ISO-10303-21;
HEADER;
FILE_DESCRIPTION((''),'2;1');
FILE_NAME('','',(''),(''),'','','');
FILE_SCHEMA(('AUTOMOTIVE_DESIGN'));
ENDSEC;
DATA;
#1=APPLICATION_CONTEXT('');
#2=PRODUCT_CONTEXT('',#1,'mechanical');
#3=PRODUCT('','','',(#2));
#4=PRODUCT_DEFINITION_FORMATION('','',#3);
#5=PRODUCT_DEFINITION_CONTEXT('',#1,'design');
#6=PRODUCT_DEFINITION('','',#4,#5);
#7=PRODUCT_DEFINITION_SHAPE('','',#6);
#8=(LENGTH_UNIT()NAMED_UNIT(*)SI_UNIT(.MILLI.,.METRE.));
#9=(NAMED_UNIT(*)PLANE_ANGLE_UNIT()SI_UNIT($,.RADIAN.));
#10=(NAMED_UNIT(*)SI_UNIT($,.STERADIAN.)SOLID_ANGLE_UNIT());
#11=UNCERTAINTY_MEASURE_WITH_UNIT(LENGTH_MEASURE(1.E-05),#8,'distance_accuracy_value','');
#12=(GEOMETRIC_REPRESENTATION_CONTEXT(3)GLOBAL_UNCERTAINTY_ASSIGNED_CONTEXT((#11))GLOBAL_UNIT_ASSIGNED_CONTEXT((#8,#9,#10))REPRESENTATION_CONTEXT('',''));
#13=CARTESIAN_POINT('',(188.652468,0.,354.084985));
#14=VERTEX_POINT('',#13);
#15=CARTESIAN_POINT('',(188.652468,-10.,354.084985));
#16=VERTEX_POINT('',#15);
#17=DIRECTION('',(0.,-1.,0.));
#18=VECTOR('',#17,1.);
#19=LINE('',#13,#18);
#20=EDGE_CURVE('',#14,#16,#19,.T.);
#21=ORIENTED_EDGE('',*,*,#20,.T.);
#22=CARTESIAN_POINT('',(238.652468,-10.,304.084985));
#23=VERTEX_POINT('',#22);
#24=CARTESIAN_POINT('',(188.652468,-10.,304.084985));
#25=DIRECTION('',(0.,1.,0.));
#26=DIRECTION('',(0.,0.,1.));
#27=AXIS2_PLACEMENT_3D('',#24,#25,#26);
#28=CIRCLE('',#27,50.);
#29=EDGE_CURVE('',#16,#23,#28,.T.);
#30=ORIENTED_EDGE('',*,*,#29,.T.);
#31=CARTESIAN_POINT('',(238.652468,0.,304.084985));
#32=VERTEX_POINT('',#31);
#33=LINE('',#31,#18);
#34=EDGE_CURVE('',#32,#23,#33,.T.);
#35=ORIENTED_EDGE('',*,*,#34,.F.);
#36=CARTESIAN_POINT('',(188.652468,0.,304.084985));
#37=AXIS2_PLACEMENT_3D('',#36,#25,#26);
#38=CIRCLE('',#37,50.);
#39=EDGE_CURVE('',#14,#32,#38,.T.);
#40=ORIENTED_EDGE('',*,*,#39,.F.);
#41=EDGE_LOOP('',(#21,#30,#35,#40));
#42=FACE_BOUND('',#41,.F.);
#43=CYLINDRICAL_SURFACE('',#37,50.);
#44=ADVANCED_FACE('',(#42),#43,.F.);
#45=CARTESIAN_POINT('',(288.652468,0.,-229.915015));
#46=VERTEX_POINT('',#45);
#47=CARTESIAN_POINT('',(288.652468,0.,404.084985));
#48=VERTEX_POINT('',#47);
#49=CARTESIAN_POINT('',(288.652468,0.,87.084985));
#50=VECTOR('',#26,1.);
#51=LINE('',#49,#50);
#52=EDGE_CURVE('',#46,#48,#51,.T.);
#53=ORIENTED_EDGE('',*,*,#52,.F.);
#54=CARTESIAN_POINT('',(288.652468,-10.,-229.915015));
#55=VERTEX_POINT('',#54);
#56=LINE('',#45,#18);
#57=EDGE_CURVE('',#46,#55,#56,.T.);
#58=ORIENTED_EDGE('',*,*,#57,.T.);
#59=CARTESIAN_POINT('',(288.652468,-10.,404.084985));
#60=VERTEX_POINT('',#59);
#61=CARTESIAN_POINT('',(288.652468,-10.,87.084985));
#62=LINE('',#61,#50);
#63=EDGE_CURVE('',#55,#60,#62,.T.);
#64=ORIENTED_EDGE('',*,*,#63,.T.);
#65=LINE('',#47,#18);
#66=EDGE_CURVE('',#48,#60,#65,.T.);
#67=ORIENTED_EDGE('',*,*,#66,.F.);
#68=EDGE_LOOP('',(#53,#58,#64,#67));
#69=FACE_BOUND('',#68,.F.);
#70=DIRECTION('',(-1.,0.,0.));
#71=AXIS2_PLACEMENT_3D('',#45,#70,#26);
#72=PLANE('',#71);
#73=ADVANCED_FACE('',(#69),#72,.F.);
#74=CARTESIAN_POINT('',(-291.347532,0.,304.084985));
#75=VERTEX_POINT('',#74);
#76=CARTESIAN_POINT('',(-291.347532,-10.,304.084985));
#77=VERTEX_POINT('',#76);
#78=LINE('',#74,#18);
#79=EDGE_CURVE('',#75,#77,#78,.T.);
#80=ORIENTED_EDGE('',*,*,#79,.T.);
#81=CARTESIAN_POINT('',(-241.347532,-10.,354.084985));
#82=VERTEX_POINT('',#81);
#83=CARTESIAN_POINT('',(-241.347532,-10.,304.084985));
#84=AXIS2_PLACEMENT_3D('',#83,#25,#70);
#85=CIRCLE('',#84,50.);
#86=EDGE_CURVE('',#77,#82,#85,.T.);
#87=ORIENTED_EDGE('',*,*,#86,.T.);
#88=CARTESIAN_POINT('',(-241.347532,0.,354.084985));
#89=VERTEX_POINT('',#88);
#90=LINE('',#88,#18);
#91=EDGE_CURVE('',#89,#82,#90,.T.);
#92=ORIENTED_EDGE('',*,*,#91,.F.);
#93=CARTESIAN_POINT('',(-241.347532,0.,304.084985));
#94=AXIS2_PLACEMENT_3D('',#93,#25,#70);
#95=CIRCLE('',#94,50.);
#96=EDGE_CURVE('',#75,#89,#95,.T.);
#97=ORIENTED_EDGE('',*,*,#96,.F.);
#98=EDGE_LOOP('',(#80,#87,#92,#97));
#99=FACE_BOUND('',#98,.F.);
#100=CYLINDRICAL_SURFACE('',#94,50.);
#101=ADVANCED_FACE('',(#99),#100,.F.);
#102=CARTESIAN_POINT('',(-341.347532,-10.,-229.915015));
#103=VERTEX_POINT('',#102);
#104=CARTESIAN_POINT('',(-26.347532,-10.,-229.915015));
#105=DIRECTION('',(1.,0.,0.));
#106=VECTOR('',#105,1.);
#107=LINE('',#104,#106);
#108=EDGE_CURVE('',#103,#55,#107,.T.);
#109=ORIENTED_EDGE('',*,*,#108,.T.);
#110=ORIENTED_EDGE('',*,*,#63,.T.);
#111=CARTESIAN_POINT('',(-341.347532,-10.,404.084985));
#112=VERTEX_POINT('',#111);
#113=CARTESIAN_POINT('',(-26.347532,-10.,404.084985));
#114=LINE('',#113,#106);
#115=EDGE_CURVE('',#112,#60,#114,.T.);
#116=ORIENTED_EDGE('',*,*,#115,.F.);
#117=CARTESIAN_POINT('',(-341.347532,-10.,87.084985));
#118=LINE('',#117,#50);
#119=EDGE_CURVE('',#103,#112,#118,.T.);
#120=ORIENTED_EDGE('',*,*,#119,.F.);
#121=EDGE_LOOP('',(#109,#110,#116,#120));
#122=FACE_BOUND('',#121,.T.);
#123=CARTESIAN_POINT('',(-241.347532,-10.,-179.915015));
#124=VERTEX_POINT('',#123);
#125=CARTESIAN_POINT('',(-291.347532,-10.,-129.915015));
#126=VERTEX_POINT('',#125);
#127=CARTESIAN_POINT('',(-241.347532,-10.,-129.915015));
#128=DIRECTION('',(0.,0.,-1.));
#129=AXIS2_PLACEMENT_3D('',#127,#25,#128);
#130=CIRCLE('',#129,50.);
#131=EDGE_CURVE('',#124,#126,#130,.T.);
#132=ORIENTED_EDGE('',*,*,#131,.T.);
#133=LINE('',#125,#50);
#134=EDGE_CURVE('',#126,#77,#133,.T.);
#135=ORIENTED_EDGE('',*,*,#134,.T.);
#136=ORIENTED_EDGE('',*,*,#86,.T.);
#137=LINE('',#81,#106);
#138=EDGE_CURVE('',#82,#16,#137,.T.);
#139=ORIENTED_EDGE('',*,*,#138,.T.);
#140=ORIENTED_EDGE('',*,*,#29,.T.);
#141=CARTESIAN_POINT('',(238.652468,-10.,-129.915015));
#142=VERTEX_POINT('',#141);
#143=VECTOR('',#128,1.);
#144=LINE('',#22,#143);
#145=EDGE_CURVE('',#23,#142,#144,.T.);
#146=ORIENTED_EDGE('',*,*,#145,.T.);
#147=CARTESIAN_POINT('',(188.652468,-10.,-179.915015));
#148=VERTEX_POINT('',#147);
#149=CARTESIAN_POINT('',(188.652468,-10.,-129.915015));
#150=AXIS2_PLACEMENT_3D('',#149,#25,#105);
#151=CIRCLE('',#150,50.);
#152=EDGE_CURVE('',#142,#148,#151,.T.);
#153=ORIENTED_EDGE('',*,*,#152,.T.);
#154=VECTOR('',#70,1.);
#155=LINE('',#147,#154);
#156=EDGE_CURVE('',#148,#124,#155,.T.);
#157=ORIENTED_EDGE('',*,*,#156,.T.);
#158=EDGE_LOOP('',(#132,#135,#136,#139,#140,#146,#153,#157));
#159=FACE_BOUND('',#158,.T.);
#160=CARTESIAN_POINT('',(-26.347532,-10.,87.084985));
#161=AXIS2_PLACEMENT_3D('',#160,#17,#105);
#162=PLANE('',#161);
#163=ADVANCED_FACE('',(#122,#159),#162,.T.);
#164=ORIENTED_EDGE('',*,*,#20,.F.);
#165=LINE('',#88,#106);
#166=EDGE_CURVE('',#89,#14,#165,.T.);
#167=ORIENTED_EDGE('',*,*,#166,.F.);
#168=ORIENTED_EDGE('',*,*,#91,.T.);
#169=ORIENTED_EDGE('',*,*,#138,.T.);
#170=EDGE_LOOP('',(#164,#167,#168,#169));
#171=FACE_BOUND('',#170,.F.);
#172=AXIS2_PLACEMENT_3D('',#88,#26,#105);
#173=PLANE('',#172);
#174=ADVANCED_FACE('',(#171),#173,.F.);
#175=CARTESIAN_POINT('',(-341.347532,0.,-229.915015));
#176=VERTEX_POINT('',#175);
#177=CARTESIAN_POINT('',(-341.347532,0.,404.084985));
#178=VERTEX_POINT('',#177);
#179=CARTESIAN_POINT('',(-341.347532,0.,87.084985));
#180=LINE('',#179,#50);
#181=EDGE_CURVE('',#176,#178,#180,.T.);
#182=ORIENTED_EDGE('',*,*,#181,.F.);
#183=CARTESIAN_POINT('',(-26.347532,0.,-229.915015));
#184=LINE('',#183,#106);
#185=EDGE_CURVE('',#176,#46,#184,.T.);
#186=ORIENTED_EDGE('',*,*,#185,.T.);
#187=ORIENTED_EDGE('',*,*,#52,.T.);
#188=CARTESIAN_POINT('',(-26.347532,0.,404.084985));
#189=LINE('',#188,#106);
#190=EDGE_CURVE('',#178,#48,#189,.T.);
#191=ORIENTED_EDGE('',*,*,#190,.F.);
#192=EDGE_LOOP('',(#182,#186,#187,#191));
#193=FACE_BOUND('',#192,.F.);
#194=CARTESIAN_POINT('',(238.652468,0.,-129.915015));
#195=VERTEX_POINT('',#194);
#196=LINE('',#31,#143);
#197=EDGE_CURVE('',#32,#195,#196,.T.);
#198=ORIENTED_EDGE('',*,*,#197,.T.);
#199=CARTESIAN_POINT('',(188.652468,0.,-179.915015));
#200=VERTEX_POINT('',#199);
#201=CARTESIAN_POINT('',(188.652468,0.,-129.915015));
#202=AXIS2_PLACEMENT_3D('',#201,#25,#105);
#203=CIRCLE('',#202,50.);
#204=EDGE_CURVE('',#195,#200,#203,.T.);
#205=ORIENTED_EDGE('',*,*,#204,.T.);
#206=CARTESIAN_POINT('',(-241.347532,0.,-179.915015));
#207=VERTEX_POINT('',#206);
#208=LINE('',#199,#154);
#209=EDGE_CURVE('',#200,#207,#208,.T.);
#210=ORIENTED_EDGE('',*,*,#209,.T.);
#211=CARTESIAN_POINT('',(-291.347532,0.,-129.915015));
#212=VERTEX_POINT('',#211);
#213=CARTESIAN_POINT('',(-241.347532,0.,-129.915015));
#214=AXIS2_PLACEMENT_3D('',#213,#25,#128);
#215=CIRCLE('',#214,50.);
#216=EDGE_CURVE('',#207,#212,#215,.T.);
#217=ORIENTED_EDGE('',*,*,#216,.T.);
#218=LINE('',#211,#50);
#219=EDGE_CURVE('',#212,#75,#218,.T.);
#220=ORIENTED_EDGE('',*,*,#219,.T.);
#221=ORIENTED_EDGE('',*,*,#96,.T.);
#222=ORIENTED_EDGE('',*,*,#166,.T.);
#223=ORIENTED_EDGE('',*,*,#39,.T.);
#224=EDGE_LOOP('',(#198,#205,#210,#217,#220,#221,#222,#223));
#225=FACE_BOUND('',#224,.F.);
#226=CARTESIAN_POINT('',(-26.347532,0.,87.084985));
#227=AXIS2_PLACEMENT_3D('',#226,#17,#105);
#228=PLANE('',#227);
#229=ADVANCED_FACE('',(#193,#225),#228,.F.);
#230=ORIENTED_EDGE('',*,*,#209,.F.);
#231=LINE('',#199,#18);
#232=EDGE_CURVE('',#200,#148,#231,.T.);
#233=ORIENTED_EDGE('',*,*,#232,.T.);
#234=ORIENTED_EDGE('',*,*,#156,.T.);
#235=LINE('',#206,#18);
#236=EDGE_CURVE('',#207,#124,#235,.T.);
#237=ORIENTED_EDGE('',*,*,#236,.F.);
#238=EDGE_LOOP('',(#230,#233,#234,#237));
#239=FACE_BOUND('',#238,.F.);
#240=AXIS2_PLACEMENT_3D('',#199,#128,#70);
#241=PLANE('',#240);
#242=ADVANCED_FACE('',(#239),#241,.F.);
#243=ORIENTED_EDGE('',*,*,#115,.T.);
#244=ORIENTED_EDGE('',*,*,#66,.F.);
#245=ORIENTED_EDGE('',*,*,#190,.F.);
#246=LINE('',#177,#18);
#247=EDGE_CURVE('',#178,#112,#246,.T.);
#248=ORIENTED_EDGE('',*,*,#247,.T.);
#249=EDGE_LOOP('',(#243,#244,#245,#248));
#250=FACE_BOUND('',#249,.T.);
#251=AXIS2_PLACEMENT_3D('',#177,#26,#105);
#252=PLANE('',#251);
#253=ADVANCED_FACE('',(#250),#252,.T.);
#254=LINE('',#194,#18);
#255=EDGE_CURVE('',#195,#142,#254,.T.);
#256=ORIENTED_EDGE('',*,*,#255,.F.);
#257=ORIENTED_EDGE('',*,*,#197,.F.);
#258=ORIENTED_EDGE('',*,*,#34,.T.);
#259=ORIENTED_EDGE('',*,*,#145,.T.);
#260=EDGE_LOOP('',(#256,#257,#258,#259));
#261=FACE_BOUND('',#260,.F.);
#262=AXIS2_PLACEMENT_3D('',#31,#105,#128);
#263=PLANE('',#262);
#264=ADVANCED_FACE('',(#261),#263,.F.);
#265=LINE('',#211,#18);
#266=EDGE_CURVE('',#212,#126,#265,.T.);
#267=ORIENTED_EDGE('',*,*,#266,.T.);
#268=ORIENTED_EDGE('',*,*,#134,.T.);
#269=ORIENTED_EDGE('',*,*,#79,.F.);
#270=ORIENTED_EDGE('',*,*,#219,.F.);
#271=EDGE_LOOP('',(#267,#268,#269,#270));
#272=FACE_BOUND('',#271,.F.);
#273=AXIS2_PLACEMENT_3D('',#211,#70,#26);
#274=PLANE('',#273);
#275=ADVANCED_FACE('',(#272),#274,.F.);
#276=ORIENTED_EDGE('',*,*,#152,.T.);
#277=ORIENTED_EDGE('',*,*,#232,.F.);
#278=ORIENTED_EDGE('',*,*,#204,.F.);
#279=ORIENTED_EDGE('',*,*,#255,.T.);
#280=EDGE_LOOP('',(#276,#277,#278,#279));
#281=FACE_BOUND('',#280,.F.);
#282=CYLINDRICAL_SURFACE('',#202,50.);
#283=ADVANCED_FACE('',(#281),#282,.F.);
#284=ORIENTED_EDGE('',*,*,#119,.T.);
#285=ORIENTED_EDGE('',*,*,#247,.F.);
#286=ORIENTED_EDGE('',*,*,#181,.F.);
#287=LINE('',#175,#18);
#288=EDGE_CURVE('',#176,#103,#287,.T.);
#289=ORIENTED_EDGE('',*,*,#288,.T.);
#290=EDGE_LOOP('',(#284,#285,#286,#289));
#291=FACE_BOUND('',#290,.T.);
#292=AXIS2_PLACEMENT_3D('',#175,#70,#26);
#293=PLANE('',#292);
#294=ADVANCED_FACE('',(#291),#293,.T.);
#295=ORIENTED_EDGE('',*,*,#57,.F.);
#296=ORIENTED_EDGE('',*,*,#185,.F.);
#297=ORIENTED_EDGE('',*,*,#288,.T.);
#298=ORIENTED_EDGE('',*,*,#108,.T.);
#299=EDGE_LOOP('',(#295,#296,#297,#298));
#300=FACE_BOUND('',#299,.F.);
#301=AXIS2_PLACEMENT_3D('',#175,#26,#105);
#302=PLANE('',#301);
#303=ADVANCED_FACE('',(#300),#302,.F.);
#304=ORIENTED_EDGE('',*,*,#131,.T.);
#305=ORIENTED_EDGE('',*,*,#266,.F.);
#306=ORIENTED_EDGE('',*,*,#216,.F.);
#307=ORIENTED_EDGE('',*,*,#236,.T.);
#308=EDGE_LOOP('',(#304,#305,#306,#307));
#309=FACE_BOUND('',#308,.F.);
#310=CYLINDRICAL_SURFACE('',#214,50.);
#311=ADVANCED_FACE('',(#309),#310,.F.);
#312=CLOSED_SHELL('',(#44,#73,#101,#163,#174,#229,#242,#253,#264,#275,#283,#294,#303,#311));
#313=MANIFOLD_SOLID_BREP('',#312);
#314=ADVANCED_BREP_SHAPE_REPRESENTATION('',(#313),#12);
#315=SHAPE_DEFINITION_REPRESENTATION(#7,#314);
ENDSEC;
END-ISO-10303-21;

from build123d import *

# Parameters (mm, degrees)
F0_W     = 630
F0_H     = 634
F1_DEPTH = 10


# Not quite as in the source:
# - a feature names something its author has since deleted; it is built from what else it names


with BuildPart() as f1:
    # F0 (on Front) → F1 (new body)
    with BuildSketch(Plane.XZ):
        with Locations((-26.3475316763, 87.0849853243)):
            Rectangle(F0_W, F0_H)
        with BuildLine():
            ThreePointArc((-291.3475316763, 304.0849853243), (-276.7028707356, 339.4403243836), (-241.3475316763, 354.0849853243))
            Line((-241.3475316763, 354.0849853243), (188.6524683237, 354.0849853243))
            ThreePointArc((188.6524683237, 354.0849853243), (224.007807383, 339.4403243836), (238.6524683237, 304.0849853243))
            Line((238.6524683237, 304.0849853243), (238.6524683237, -129.9150146759))
            ThreePointArc((238.6524683237, -129.9150146759), (224.007807383, -165.2703537352), (188.6524683237, -179.9150146759))
            Line((188.6524683237, -179.9150146759), (-241.3475316763, -179.9150146759))
            ThreePointArc((-241.3475316763, -179.9150146759), (-276.7028707356, -165.2703537352), (-291.3475316763, -129.9150146759))
            Line((-291.3475316763, -129.9150146759), (-291.3475316763, 304.0849853243))
        make_face(mode=Mode.SUBTRACT)
    extrude(amount=F1_DEPTH)


solid = f1.part
